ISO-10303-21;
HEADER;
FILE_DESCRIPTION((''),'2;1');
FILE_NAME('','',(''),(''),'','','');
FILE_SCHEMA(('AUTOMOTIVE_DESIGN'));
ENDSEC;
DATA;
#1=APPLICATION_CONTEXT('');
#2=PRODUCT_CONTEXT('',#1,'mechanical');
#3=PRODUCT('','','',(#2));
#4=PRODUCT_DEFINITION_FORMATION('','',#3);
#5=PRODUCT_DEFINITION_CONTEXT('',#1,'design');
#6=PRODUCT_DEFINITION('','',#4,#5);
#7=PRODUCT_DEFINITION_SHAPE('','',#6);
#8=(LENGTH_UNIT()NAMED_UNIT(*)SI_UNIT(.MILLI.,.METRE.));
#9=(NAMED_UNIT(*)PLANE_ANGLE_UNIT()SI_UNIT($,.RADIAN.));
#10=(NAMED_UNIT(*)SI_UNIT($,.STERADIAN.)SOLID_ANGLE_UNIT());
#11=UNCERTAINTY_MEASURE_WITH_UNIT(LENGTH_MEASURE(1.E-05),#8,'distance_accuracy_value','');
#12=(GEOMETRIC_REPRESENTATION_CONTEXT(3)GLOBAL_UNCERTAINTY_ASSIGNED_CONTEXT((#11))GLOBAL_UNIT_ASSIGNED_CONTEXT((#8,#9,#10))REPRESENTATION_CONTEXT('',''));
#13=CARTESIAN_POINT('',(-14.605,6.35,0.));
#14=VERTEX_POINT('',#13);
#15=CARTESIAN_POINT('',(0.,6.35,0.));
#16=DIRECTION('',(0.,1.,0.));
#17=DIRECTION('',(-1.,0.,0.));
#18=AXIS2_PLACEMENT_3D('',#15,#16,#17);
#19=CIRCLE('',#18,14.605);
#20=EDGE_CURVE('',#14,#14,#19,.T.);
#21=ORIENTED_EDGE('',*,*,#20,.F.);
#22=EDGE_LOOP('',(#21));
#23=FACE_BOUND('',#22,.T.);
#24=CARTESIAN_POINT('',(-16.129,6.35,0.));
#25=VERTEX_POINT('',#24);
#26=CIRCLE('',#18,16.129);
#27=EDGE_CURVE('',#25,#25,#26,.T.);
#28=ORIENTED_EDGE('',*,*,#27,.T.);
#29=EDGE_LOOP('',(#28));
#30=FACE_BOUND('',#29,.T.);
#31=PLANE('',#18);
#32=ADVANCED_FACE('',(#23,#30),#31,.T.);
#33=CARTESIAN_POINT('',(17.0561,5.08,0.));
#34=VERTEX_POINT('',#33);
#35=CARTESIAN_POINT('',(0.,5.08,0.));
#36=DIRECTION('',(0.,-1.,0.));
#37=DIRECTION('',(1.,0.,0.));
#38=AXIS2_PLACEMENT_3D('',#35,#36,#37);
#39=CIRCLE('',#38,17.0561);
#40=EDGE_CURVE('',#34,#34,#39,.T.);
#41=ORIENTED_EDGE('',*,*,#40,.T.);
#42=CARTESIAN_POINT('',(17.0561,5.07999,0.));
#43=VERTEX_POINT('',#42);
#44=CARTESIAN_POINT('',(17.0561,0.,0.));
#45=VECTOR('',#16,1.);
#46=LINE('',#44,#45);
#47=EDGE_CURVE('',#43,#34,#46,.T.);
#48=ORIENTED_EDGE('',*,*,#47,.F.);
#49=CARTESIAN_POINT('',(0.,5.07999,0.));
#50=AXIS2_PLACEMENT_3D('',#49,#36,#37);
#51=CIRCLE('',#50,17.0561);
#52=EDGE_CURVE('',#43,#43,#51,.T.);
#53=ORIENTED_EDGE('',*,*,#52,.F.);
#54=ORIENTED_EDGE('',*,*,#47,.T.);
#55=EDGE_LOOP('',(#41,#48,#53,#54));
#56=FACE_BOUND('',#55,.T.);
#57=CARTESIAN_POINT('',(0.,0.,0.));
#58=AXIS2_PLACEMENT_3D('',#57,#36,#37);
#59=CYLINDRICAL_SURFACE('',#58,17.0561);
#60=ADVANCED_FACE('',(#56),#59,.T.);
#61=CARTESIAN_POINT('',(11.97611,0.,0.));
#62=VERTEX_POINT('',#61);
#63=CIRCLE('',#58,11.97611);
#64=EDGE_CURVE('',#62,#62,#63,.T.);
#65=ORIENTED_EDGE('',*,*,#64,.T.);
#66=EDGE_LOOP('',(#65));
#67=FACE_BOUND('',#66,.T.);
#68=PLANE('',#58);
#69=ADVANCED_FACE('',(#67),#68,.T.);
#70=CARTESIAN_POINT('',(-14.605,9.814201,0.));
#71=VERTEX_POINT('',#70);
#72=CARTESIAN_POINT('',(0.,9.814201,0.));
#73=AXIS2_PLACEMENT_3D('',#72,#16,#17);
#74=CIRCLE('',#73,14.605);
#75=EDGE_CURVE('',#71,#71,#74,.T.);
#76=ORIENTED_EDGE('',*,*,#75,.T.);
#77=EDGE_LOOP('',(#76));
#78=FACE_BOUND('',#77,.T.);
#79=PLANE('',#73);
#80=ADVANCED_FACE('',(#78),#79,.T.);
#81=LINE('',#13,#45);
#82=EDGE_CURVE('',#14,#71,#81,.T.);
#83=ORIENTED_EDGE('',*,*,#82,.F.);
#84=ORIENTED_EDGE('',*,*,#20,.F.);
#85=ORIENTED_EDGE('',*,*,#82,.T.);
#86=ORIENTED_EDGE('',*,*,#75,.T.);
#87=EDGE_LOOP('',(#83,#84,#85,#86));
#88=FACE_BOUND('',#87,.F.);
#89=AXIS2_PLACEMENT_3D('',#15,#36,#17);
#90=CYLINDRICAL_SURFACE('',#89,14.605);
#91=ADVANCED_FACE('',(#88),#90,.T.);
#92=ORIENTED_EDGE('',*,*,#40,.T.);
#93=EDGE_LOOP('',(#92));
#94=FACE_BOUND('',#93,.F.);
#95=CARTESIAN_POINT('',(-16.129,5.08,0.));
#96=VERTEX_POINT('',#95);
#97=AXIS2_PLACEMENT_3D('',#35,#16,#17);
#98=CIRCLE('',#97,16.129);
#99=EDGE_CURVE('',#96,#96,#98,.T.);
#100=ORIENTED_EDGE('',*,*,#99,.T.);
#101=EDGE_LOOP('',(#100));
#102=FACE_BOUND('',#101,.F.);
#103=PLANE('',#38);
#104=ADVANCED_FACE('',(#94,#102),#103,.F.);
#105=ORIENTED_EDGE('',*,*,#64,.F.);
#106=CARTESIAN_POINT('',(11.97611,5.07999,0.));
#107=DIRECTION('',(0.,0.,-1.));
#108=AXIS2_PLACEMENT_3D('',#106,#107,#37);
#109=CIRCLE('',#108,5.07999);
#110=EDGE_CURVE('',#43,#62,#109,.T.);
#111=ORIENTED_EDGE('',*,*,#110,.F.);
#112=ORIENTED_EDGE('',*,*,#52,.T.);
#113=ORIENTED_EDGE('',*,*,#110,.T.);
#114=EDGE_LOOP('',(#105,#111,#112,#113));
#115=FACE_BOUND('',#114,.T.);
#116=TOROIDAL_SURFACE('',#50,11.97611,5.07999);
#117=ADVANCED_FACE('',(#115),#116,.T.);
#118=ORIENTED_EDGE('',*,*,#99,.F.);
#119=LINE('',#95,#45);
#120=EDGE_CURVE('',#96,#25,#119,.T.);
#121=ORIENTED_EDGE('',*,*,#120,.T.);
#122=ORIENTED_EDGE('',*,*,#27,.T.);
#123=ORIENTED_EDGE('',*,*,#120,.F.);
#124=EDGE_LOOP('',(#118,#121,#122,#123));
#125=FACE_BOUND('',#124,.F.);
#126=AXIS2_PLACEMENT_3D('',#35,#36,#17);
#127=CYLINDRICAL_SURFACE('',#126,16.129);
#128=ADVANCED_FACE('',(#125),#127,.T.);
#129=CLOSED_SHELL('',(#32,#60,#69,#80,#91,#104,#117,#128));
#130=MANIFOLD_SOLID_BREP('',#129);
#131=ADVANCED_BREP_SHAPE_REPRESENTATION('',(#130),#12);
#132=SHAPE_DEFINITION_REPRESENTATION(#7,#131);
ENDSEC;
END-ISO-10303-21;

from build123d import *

# Parameters (mm, degrees)
F0_R     = 17.0561
F1_DEPTH = 5.08
F2_R     = 16.129
F3_DEPTH = 1.27
F4_R     = 5.07999
F5_R     = 14.605
F6_DEPTH = 3.4642005339


# Not quite as in the source:
# - a fillet or chamfer is up to 0.001 mm smaller than in the source, because OpenCascade refuses the exact size


with BuildPart() as f1:
    # F0 (on Front) → F1 (new body)
    with BuildSketch(Plane.XZ):
        Circle(F0_R)
    extrude(amount=-F1_DEPTH)

    # F2 (on face) → F3 (join)
    with BuildSketch(Plane(origin=(0, 5.08, 0), x_dir=(-1, 0, 0), z_dir=(0, 1, 0))):
        Circle(F2_R)
    extrude(amount=F3_DEPTH)

    # F4 (radius 5.08 in the source; OpenCascade refuses exactly that, so slightly less here)
    f4_edges = [f1.edges().sort_by_distance(p)[0] for p in [
        (-17.0561, 0, 0),
    ]]
    fillet(f4_edges, radius=F4_R)

    # F5 (on face) → F6 (join)
    with BuildSketch(Plane(origin=(0, 6.35, 0), x_dir=(-1, 0, 0), z_dir=(0, 1, 0))):
        Circle(F5_R)
    extrude(amount=F6_DEPTH)


solid = f1.part
